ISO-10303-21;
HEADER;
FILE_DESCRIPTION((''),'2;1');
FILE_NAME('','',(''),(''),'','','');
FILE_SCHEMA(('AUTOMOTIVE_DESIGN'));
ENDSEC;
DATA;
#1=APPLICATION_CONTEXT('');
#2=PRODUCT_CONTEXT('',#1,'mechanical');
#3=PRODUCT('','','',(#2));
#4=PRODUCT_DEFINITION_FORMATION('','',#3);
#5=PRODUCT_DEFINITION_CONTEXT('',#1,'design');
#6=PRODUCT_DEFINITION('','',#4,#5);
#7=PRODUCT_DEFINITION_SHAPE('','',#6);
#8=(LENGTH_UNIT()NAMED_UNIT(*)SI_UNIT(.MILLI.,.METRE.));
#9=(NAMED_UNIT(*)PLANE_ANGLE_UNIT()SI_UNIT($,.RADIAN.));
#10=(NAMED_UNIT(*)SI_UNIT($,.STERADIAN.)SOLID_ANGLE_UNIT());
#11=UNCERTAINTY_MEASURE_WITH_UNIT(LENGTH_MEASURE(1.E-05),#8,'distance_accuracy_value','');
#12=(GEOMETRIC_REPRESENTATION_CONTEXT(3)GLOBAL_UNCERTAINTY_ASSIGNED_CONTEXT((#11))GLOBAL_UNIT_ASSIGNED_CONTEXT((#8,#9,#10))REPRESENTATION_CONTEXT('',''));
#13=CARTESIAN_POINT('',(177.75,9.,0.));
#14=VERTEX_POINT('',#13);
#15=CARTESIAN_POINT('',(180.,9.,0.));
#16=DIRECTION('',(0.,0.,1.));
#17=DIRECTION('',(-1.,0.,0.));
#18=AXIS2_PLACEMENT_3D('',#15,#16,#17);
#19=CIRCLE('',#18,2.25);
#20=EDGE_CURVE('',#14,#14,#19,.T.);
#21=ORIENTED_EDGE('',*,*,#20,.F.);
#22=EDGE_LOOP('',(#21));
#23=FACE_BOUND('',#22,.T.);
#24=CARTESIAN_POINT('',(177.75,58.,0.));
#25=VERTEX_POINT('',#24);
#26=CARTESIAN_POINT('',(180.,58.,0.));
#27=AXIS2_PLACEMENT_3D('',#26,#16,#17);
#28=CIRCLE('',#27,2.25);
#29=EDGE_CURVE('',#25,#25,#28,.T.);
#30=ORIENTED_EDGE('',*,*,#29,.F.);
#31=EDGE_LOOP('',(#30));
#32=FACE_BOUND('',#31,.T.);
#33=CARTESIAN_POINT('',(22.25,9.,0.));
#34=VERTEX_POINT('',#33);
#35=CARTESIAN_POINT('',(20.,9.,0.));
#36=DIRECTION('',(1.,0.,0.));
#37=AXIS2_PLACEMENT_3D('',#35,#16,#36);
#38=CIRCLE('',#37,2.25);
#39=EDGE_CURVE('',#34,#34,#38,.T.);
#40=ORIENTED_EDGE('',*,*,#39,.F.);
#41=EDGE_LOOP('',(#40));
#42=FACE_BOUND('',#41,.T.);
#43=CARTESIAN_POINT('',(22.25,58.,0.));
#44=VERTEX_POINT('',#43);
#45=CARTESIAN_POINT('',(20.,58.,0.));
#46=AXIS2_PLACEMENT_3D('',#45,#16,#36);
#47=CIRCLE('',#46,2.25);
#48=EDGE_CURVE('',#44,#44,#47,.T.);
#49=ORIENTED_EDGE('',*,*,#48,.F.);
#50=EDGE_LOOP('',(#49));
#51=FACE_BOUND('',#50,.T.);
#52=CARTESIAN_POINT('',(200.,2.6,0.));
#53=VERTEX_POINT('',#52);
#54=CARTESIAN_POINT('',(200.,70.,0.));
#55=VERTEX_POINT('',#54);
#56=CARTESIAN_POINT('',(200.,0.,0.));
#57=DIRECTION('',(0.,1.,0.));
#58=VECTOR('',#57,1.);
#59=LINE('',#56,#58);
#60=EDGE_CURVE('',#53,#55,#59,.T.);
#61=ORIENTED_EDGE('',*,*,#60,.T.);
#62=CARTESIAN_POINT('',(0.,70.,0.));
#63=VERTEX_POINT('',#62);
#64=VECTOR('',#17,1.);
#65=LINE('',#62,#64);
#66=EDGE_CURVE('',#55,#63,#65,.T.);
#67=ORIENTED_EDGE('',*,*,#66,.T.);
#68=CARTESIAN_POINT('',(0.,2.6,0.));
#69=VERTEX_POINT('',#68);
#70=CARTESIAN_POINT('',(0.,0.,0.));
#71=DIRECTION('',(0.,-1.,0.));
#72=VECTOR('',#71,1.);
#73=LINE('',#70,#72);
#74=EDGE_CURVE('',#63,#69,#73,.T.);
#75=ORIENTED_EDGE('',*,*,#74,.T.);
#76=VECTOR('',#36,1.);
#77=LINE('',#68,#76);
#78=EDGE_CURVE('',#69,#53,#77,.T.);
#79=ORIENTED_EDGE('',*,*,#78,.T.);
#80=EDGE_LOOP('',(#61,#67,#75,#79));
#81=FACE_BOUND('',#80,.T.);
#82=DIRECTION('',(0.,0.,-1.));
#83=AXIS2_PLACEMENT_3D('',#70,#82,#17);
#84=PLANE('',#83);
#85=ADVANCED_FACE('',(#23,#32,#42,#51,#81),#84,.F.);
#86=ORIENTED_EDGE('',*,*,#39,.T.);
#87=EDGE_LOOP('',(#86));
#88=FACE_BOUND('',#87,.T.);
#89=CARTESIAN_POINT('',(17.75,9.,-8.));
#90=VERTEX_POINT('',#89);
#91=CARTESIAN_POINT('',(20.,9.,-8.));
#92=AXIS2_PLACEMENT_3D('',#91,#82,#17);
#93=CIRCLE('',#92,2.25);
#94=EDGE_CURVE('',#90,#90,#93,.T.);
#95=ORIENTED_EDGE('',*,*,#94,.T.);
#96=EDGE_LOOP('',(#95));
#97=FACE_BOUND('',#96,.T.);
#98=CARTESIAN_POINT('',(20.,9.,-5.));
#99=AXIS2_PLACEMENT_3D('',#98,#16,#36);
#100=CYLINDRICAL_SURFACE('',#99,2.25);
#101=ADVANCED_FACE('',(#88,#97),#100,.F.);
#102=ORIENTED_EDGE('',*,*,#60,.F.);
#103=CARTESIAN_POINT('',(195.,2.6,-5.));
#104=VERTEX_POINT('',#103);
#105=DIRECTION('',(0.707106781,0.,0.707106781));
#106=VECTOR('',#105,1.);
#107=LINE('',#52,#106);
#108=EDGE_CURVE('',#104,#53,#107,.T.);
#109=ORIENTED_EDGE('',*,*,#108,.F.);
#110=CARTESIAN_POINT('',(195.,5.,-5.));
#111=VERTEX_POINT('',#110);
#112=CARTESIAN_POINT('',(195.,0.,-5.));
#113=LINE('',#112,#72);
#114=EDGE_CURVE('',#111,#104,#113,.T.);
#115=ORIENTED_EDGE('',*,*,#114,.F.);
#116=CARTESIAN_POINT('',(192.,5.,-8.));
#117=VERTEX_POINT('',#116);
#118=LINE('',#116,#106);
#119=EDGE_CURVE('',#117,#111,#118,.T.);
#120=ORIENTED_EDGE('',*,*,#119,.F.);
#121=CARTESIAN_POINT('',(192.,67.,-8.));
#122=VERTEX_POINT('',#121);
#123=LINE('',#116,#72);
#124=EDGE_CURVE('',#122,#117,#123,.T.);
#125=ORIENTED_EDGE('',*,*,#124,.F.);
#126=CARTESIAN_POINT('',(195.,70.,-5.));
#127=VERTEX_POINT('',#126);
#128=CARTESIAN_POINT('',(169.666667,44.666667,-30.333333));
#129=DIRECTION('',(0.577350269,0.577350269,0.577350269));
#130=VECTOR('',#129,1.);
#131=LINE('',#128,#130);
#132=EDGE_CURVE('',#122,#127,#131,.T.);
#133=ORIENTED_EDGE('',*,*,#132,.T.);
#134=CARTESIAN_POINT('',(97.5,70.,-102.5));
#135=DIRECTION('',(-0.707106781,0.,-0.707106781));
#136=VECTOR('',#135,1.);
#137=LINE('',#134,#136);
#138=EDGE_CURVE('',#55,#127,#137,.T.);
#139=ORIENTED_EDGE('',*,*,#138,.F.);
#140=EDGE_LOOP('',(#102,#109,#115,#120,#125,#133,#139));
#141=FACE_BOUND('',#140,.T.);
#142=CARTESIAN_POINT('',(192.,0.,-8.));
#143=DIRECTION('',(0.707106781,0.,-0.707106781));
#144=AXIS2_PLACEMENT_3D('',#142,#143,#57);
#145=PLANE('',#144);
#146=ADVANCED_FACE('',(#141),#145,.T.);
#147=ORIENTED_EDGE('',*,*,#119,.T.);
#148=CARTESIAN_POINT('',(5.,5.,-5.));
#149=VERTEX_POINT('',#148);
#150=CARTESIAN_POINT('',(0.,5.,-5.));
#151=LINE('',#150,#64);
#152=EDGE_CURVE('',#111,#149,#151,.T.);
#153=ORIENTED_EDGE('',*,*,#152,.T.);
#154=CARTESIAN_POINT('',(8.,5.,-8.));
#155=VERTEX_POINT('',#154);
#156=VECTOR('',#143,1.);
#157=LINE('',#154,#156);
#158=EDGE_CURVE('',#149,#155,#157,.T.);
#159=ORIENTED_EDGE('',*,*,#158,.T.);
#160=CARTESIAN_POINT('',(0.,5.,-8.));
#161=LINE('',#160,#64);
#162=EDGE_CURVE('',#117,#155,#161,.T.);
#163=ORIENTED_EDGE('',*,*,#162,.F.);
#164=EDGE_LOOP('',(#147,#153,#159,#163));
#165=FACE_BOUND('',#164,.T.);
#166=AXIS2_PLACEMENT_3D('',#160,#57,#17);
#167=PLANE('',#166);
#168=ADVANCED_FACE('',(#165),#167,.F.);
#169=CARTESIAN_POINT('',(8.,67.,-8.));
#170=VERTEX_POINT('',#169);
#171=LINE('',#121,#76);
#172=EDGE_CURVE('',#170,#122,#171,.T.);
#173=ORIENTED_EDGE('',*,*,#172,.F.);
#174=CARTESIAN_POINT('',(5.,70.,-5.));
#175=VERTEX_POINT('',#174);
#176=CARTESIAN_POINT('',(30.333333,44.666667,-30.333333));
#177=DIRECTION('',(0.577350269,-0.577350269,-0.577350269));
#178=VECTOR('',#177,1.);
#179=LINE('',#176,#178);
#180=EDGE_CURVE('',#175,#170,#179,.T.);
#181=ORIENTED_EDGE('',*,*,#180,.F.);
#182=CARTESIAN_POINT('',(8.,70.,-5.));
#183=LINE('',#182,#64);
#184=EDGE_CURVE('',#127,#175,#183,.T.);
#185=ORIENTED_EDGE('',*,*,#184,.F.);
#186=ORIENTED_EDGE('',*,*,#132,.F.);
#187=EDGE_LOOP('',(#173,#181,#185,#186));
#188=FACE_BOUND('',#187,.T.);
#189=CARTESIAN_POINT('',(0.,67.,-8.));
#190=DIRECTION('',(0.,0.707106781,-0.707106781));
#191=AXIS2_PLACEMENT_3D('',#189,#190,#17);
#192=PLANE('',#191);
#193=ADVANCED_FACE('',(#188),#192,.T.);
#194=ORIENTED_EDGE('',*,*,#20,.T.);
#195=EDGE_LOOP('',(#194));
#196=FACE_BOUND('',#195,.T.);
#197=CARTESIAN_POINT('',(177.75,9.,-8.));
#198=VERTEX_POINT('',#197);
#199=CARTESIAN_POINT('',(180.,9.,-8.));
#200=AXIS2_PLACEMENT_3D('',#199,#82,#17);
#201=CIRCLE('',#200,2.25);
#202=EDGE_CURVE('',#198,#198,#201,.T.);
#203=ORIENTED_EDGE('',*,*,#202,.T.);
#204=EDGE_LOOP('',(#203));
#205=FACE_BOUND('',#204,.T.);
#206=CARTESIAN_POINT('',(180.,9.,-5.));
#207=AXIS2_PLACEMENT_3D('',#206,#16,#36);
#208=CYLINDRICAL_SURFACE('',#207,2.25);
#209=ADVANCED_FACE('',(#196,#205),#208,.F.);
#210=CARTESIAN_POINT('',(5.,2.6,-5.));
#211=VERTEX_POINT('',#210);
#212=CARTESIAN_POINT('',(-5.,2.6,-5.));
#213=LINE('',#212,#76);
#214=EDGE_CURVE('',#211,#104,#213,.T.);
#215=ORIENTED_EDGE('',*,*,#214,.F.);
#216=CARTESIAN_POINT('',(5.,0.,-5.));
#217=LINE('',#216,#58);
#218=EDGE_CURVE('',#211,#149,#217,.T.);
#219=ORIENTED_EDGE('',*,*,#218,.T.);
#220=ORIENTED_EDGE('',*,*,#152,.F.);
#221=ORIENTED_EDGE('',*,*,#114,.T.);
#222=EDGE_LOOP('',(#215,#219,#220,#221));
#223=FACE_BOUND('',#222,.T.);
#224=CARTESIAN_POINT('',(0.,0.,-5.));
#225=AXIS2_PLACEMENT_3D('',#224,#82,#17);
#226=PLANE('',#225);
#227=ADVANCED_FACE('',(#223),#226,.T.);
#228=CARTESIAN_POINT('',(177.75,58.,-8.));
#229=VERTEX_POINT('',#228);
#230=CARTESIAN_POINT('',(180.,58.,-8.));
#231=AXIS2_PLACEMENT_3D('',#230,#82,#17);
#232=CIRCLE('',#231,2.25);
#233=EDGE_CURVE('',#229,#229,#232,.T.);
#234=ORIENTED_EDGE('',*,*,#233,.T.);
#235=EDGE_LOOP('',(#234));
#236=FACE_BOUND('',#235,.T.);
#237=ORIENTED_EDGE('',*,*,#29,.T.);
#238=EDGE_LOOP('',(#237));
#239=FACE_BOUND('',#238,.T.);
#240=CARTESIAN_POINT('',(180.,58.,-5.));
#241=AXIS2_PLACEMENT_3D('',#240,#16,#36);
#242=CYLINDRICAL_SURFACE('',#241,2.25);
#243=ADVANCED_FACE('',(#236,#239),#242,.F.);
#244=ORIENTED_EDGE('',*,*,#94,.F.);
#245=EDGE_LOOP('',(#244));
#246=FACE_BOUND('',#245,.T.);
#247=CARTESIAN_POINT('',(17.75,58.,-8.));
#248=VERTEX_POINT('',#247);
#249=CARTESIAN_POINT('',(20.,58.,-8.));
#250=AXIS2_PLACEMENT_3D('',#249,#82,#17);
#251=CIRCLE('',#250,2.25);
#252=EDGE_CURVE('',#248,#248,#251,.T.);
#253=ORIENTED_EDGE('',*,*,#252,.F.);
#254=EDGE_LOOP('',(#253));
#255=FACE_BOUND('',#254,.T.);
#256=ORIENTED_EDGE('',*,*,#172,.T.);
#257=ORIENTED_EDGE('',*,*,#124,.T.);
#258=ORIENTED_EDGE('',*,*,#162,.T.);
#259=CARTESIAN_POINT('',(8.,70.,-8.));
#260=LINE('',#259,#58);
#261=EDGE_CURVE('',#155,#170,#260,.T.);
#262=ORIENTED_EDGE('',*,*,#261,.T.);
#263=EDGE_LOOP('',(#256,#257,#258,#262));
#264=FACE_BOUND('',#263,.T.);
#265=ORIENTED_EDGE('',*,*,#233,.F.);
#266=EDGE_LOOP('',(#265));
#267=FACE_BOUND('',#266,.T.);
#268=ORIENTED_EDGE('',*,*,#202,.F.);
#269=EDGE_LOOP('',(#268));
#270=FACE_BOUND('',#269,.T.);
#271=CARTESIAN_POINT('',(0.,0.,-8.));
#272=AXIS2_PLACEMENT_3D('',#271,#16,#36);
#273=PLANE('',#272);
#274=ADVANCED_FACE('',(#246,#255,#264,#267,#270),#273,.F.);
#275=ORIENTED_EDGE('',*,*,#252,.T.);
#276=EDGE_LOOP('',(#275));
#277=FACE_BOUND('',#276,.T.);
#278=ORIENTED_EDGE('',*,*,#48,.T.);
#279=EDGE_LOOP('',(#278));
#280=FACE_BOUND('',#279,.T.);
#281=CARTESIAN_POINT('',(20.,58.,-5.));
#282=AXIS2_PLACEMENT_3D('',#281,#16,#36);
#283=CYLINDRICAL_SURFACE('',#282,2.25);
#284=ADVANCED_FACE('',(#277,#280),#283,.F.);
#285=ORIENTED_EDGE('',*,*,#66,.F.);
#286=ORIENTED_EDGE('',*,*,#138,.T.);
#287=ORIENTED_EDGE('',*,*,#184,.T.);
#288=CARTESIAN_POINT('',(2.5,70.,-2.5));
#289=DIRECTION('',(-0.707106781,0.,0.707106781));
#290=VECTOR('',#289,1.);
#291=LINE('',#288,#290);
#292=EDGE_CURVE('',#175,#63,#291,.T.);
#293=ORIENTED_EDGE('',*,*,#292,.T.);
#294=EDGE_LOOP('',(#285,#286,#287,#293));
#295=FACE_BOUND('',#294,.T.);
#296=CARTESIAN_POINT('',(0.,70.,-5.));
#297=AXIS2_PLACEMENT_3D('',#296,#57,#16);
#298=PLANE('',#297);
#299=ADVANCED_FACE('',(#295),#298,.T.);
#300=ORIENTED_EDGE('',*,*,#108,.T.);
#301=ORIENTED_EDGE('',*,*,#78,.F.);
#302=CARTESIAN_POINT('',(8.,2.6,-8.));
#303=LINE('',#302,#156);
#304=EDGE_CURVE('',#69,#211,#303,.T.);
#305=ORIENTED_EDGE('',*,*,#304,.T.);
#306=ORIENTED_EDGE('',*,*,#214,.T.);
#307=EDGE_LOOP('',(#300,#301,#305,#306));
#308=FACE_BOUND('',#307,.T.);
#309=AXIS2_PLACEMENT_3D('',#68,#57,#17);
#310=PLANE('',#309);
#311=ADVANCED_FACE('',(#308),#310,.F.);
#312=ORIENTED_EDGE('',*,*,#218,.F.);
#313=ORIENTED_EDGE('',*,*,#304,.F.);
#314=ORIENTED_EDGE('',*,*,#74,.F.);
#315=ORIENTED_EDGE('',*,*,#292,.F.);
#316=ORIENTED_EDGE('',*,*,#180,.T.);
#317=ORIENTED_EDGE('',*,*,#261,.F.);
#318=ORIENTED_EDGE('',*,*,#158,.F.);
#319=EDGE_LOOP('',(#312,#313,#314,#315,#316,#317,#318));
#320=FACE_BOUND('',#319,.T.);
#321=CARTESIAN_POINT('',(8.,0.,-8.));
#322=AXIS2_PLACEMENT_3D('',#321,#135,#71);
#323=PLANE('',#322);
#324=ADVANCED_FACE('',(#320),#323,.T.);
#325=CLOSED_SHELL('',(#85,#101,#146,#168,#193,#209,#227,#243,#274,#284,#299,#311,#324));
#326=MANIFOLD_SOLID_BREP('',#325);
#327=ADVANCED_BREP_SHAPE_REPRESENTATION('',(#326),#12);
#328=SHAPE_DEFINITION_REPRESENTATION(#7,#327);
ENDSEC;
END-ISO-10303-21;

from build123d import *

# Parameters (mm, degrees)
BOSS_EXTRUDE1_START     = -5
BOSS_EXTRUDE1_OUTLINE_W = 200
BOSS_EXTRUDE1_OUTLINE_H = 70
BOSS_EXTRUDE1_OUTLINE_R = 2.25
BOSS_EXTRUDE1_DEPTH     = 5
BOSS_EXTRUDE2_START     = 3
SKETCH2_W               = 200
SKETCH2_H               = 65
SKETCH2_R               = 2.25
BOSS_EXTRUDE2_DEPTH     = 3
CHAMFER1_SIZE           = 8
CHAMFER3_SIZE           = 3
SKETCH3_W               = 7.071067812
SKETCH3_H               = 2.6
CUT_EXTRUDE1_DEPTH      = 224.573349607


# Read off the part's stored shape, not the designer's step: Boss-Extrude1
with BuildPart() as part:
    # Boss-Extrude1 outline → Boss-Extrude1 (new body)
    with BuildSketch(Plane.XY.offset(BOSS_EXTRUDE1_START)):
        with Locations((100, 35)):
            Rectangle(BOSS_EXTRUDE1_OUTLINE_W, BOSS_EXTRUDE1_OUTLINE_H)
        with Locations((20, 9)):
            Circle(BOSS_EXTRUDE1_OUTLINE_R, mode=Mode.SUBTRACT)
        with Locations((180, 9)):
            Circle(BOSS_EXTRUDE1_OUTLINE_R, mode=Mode.SUBTRACT)
        with Locations((20, 58)):
            Circle(BOSS_EXTRUDE1_OUTLINE_R, mode=Mode.SUBTRACT)
        with Locations((180, 58)):
            Circle(BOSS_EXTRUDE1_OUTLINE_R, mode=Mode.SUBTRACT)
    extrude(amount=BOSS_EXTRUDE1_DEPTH)

    # Sketch2 → Boss-Extrude2 (add)
    with BuildSketch(Plane(origin=(0, 0, -5), x_dir=(-1, 0, 0), z_dir=(0, 0, -1)).offset(BOSS_EXTRUDE2_START)):
        with Locations((-100, 37.5)):
            Rectangle(SKETCH2_W, SKETCH2_H)
        with Locations(Location((-20, 9, 0), (0, 0, 180))):
            Circle(SKETCH2_R, mode=Mode.SUBTRACT)
        with Locations((-180, 9)):
            Circle(SKETCH2_R, mode=Mode.SUBTRACT)
        with Locations(Location((-20, 58, 0), (0, 0, 180))):
            Circle(SKETCH2_R, mode=Mode.SUBTRACT)
        with Locations((-180, 58)):
            Circle(SKETCH2_R, mode=Mode.SUBTRACT)
    extrude(amount=-BOSS_EXTRUDE2_DEPTH)

    # Chamfer1
    # the kernel refuses this chamfer: 8 mm, written as the material it takes off along each edge
    with BuildSketch(Plane(origin=(200, -15.573463904, -8), x_dir=(-0.9996219169112968, 0, -0.027495876610586296), z_dir=(0, 1, 0)), Plane(origin=(0, 90.573463904, -8), x_dir=(0.9996219169112968, 0, -0.027495876610586275), z_dir=(0, -1, 0))) as chamfer1_piece_1:
        Polygon((CHAMFER1_SIZE * 0.999621916911, CHAMFER1_SIZE * 0.0274958766106), (-CHAMFER1_SIZE * 0.0274958766106, CHAMFER1_SIZE * 0.999621916911), (0, 0), align=None)
    extrude(amount=106.146927807, mode=Mode.SUBTRACT)

    # Chamfer3
    chamfer3_edges = [part.edges().sort_by_distance(p)[0] for p in [
        (100, 70, -8),
    ]]
    chamfer(chamfer3_edges, length=CHAMFER3_SIZE)

    # Sketch3 → Cut-Extrude1 (cut, through all, along a direction that is not the sketch's normal)
    with BuildSketch(Plane(origin=(100, 0, -100), x_dir=(-0.7071067811865452, 0, -0.7071067811865498), z_dir=(0.7071067811865498, 0, -0.7071067811865452))):
        with Locations((-137.885822331, 1.3)):
            Rectangle(SKETCH3_W, SKETCH3_H)
    extrude(amount=-CUT_EXTRUDE1_DEPTH, dir=(1, 0, 0), mode=Mode.SUBTRACT)


solid = part.part
